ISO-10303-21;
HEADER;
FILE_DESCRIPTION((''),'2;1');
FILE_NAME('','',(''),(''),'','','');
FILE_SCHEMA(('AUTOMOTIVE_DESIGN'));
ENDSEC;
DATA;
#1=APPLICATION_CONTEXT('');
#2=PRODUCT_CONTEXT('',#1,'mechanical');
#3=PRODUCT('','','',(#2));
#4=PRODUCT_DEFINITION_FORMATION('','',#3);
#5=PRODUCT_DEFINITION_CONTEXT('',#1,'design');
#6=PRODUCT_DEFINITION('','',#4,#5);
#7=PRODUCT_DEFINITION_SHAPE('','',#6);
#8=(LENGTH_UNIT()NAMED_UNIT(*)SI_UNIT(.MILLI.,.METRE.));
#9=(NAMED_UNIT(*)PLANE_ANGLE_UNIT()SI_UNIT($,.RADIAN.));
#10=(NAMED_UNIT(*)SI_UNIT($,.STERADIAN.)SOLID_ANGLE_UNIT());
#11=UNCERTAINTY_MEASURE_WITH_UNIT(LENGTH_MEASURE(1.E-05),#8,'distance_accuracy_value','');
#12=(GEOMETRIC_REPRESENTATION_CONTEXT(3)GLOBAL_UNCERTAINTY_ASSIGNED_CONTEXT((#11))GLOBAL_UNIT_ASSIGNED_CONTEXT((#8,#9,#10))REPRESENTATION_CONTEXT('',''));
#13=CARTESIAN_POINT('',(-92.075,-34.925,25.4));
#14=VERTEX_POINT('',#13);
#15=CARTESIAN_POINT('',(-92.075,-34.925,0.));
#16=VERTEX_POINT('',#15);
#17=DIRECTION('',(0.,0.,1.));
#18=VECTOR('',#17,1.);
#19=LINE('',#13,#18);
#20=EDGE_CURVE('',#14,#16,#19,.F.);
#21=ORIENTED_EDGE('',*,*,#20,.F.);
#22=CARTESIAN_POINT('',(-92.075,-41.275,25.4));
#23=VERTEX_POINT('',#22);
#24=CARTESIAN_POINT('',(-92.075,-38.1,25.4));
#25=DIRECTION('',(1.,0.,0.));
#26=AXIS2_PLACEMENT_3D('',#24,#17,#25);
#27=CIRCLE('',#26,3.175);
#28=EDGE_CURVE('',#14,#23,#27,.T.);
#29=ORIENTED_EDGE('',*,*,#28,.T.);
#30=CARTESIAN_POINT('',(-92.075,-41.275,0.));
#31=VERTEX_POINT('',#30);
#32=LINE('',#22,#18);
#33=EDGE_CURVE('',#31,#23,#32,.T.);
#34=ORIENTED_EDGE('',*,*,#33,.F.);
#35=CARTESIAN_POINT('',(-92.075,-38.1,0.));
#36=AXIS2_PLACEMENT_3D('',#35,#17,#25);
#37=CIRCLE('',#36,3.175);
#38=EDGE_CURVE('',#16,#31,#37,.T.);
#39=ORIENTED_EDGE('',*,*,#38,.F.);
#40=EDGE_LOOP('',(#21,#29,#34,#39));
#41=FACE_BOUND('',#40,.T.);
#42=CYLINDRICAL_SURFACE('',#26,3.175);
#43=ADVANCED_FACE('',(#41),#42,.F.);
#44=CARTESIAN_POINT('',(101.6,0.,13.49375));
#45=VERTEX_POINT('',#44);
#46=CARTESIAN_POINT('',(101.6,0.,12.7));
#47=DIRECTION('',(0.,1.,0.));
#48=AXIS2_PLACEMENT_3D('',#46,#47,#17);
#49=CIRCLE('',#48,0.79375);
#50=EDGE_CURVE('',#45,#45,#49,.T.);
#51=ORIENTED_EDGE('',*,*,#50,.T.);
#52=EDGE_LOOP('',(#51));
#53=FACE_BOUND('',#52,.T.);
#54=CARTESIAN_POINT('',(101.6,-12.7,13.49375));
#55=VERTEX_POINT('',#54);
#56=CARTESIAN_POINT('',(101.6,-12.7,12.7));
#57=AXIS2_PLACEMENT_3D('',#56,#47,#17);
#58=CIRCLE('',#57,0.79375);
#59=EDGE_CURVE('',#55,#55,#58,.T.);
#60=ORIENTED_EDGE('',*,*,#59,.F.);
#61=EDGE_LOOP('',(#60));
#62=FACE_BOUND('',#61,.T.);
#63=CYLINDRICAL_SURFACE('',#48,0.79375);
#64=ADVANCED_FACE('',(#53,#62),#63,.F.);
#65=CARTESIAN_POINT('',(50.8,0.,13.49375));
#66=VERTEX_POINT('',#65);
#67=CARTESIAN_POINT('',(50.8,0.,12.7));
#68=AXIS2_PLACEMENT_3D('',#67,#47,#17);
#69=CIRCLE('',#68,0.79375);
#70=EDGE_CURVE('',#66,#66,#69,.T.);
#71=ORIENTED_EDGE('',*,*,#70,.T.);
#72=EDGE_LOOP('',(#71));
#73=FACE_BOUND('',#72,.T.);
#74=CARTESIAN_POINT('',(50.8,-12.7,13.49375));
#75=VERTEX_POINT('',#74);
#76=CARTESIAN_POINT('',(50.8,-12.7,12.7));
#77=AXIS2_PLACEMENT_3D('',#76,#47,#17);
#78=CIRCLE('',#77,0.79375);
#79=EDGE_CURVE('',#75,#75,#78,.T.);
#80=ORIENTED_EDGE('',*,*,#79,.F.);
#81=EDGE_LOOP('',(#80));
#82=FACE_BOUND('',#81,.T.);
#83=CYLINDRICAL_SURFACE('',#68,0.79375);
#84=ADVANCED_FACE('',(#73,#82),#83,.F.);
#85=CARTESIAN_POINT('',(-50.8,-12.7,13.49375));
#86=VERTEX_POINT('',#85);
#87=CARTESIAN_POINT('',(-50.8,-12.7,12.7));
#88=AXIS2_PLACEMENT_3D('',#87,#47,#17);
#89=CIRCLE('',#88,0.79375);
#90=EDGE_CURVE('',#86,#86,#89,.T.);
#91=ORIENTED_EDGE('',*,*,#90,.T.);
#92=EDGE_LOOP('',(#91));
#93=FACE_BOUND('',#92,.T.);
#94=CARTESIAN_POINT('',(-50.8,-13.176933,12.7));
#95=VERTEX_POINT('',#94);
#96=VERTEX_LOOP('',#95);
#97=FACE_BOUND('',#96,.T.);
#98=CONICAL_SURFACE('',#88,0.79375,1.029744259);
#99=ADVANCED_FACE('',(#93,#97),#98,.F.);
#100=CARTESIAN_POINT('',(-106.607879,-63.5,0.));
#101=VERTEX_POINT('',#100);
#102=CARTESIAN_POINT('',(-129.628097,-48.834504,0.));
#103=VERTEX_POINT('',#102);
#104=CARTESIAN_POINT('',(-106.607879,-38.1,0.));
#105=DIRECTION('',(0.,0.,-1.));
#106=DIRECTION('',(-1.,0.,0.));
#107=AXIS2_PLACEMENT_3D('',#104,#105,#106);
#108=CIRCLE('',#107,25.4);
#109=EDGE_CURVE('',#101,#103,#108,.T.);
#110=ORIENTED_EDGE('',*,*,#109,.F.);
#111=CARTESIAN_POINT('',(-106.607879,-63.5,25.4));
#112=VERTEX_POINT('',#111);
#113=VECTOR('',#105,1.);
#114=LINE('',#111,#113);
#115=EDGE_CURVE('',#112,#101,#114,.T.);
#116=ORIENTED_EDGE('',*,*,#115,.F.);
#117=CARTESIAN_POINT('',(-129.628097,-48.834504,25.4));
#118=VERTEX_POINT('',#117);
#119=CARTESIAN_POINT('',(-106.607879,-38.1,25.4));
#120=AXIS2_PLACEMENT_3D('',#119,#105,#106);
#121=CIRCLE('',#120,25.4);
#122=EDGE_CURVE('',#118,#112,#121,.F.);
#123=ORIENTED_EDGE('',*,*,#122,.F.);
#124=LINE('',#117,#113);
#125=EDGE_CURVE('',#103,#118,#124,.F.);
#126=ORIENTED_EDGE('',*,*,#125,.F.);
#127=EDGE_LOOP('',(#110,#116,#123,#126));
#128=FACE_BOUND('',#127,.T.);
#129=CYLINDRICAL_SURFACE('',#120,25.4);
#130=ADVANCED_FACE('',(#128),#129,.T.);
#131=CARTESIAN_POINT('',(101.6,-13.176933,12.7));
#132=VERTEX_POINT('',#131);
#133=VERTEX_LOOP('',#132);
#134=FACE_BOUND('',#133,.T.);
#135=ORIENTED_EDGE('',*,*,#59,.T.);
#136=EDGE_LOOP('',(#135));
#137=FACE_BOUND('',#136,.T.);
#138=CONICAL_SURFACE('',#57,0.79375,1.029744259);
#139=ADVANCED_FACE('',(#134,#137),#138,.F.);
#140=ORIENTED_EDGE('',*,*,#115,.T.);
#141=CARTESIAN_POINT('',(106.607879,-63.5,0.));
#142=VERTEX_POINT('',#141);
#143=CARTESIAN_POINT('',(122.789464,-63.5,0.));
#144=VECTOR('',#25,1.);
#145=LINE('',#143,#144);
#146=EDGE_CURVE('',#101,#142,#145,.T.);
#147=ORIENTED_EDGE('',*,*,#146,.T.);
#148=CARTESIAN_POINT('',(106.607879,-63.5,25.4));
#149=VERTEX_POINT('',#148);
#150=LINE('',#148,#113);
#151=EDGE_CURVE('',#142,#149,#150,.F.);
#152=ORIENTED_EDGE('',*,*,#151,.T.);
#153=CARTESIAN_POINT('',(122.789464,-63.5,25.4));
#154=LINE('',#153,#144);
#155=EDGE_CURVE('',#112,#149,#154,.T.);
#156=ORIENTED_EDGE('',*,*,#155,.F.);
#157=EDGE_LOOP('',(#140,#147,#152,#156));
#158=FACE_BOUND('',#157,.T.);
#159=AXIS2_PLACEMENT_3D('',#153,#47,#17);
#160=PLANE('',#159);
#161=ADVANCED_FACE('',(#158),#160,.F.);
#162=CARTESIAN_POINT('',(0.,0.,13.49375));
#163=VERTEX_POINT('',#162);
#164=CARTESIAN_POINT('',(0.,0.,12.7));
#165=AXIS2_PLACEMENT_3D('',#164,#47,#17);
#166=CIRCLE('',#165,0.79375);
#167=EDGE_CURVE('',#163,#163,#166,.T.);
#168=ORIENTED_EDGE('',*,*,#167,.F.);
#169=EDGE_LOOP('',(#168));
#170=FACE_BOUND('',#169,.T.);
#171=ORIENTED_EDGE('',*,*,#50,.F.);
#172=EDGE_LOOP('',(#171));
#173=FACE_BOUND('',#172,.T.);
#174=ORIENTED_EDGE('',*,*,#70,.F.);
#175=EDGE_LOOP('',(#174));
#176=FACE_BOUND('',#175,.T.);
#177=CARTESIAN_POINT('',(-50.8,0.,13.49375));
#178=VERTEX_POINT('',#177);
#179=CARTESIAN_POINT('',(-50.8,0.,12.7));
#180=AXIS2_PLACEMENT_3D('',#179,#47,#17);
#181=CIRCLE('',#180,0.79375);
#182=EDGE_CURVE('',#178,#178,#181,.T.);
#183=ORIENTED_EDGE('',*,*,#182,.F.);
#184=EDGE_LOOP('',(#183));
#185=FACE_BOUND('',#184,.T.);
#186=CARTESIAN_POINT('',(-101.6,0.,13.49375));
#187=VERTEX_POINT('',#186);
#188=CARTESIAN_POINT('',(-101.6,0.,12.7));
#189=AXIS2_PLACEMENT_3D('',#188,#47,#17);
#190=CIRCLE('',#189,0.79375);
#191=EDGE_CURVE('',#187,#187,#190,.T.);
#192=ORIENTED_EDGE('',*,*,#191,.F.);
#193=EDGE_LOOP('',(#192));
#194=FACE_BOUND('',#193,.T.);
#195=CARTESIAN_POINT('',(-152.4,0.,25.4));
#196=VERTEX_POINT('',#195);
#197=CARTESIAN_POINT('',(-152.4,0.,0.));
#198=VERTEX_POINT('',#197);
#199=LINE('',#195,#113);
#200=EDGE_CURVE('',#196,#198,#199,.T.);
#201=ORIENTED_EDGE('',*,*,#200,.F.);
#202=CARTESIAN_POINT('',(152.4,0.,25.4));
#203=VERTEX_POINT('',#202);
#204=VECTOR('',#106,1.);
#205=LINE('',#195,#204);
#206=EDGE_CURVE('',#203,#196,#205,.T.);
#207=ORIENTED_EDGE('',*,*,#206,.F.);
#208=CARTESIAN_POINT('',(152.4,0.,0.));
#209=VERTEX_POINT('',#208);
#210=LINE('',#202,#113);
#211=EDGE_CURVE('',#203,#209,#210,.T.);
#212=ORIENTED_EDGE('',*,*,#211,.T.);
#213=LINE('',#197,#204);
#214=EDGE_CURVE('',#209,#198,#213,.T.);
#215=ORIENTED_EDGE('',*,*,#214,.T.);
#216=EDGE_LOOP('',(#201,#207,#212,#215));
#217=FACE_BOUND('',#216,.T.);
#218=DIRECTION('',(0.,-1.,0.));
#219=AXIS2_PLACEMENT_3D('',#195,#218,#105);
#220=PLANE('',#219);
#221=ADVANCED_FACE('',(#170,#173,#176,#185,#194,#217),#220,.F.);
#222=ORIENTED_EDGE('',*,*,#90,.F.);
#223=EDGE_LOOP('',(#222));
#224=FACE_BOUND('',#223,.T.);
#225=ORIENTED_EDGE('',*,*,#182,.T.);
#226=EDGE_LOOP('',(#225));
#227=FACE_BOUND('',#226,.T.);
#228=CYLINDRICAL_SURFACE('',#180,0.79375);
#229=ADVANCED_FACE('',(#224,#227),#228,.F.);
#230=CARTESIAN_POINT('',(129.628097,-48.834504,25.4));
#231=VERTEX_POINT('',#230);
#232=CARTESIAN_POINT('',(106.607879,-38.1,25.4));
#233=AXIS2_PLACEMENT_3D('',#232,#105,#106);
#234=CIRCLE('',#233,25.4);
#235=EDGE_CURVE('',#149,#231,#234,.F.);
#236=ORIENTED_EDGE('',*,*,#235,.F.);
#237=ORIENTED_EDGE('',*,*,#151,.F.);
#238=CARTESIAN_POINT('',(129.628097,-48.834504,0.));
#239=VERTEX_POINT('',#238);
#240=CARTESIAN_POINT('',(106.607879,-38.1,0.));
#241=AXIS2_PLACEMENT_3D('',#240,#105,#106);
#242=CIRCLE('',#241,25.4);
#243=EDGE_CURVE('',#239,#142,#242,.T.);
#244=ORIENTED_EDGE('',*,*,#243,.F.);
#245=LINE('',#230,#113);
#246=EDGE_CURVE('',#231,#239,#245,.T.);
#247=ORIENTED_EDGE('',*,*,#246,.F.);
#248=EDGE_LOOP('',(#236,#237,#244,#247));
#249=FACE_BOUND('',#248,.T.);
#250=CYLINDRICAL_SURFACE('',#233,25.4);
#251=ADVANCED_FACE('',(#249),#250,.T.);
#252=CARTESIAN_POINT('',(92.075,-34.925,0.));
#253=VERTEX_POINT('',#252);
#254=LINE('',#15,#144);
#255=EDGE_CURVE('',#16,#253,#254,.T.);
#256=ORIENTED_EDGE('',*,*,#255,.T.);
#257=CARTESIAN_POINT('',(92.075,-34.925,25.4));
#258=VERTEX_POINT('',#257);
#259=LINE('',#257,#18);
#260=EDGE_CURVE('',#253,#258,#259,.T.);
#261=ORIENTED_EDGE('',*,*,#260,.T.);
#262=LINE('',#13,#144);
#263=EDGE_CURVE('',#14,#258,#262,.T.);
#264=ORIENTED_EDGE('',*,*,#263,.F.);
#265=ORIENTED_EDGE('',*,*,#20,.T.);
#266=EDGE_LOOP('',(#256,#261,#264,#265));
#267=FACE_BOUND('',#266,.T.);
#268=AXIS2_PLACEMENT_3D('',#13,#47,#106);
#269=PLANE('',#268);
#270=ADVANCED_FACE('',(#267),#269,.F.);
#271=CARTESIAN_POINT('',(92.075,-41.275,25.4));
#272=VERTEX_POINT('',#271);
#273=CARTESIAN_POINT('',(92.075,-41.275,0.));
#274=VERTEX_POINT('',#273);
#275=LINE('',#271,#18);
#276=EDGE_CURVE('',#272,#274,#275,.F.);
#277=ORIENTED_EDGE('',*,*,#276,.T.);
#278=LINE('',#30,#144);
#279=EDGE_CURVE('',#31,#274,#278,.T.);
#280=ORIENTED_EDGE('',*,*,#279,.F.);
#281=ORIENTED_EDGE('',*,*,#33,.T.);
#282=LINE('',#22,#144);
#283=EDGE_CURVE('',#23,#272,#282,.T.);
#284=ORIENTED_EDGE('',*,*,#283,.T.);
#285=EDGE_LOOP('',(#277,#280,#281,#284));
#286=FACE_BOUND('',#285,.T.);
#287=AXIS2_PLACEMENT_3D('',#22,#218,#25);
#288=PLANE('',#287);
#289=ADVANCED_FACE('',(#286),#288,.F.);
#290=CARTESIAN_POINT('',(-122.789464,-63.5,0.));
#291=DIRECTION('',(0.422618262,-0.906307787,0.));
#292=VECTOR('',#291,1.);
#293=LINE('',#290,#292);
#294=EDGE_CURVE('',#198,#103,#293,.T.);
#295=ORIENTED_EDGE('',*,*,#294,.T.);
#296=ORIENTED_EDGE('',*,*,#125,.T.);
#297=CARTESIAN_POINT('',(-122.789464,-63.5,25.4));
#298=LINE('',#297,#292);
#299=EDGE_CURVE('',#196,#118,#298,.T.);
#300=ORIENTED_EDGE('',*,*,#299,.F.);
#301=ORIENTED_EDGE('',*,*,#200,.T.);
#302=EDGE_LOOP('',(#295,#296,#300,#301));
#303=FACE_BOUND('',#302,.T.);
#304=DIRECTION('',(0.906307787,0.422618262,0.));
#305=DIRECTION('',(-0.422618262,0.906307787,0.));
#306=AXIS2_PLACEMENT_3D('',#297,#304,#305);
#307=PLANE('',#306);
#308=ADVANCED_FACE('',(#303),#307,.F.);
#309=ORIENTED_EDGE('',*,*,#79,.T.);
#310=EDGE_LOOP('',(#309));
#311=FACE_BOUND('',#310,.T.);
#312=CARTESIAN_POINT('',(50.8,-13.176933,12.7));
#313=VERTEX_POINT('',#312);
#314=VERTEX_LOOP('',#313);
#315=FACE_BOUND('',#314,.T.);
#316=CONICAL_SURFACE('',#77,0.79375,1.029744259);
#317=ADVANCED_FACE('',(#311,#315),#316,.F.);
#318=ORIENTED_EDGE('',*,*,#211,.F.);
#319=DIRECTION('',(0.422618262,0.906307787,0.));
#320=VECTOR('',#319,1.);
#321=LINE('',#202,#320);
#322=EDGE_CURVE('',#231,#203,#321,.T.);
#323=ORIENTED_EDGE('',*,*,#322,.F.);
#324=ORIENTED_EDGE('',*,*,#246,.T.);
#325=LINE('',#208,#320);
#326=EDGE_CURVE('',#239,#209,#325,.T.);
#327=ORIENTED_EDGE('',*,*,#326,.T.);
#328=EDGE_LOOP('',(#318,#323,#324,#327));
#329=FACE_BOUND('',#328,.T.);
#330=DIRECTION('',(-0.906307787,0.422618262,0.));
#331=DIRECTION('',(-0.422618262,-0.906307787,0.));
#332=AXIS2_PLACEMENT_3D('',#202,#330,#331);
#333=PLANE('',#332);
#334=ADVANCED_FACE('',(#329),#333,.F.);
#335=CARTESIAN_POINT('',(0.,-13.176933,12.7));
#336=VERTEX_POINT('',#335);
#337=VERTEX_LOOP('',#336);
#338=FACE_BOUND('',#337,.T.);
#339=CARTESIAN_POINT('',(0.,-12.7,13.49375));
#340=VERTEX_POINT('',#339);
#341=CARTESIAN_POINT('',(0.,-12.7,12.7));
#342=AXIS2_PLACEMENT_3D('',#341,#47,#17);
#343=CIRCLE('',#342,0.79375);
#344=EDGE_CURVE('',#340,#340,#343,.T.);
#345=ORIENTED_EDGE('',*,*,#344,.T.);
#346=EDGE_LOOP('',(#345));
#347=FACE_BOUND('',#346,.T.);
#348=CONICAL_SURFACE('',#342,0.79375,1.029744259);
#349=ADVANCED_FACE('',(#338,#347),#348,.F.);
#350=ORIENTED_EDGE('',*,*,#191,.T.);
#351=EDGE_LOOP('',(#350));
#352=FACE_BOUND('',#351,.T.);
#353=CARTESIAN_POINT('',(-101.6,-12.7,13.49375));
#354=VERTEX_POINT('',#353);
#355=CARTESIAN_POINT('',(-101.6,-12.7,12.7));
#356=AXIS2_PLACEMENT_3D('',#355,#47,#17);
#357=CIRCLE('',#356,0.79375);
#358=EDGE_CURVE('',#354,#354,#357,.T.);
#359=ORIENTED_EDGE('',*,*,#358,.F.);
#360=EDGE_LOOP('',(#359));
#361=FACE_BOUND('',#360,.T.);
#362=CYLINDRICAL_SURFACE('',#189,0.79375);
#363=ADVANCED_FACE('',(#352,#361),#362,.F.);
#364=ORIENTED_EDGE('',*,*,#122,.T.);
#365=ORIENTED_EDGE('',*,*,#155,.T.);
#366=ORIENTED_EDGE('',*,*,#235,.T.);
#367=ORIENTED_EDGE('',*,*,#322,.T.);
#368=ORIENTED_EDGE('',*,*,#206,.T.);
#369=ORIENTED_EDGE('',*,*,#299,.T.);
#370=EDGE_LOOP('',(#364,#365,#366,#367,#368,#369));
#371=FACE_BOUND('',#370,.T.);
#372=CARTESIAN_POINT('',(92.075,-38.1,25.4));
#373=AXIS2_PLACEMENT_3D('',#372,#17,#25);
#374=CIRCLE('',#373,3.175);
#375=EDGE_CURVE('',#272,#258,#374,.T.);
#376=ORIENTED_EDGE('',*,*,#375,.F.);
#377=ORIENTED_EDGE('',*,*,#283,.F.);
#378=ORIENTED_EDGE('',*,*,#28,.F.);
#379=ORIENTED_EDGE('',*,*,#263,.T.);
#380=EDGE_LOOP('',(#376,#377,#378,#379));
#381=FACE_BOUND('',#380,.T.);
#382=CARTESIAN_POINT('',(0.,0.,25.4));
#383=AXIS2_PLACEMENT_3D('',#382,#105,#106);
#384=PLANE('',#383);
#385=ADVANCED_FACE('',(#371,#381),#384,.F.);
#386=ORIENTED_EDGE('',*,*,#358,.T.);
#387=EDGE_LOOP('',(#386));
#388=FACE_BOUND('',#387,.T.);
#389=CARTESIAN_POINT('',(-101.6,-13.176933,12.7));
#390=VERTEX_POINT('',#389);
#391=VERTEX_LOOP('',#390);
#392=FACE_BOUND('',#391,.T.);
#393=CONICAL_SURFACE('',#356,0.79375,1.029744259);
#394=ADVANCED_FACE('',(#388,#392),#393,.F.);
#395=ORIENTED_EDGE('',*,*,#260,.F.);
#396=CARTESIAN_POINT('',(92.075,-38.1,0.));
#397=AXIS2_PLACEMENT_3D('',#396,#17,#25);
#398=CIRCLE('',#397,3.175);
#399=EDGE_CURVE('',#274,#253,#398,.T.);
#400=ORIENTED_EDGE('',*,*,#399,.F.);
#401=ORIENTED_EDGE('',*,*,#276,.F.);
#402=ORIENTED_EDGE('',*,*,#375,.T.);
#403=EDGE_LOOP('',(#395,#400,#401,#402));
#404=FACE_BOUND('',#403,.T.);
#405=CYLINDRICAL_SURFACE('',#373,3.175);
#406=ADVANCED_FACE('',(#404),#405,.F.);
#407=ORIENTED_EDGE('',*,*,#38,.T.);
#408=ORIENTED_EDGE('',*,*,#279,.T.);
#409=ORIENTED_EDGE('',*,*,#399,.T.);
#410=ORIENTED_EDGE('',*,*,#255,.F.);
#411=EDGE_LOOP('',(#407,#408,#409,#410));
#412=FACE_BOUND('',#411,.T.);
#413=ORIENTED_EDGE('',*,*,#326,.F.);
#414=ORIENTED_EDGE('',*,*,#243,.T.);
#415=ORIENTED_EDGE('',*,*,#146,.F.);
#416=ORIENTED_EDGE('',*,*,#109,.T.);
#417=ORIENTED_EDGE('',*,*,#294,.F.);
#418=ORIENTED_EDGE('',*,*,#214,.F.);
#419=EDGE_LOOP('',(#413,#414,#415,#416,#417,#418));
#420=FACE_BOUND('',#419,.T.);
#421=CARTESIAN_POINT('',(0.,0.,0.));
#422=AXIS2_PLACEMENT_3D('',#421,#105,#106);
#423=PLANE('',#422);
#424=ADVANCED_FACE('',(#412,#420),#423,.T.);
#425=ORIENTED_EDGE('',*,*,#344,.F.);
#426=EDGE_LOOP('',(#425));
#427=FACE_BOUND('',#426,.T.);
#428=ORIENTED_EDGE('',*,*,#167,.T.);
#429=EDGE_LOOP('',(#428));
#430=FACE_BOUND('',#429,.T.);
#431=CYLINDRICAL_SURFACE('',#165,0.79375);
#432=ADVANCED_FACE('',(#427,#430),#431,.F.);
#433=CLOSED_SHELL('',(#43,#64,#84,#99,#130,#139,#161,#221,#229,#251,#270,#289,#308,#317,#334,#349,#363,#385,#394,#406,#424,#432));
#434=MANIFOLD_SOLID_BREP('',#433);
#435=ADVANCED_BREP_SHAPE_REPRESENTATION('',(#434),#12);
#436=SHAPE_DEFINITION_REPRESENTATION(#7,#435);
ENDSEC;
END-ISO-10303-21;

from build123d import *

# Parameters (mm, degrees)
BOSS_EXTRUDE1_DEPTH                = 25.4
FILLET1_R                          = 25.4
F_1_4_0_25_DIAMETER_SLOT1_DEPTH    = 25.4
F_1_16_0_0625_DIAMETER_HOLE1_D     = 1.5875
F_1_16_0_0625_DIAMETER_HOLE1_DEPTH = 12.7
F_1_16_0_0625_DIAMETER_HOLE1_TIP   = 0.476933116


# Read off the part's stored shape, not the designer's step: 1/4 (0.25) Diameter Slot1
with BuildPart() as part:
    # Sketch1 → Boss-Extrude1 (new body)
    with BuildSketch(Plane.XY):
        Polygon((-152.4, 0), (152.4, 0), (122.789463707, -63.5), (-122.789463707, -63.5), align=None)
    extrude(amount=BOSS_EXTRUDE1_DEPTH)

    # Fillet1
    fillet1_edges = [part.edges().sort_by_distance(p)[0] for p in [
        (122.789463707, -63.5, 12.7),
        (-122.789463707, -63.5, 12.7),
    ]]
    fillet(fillet1_edges, radius=FILLET1_R)

    # 1/4 (0.25) Diameter Slot1 outline → 1/4 (0.25) Diameter Slot1 (cut)
    with BuildSketch(Plane.XY):
        with BuildLine():
            Line((-92.075, -41.275), (92.075, -41.275))
            ThreePointArc((92.075, -41.275), (95.25, -38.1), (92.075, -34.925))
            Line((92.075, -34.925), (-92.075, -34.925))
            ThreePointArc((-92.075, -34.925), (-95.25, -38.1), (-92.075, -41.275))
        make_face()
    extrude(amount=F_1_4_0_25_DIAMETER_SLOT1_DEPTH, mode=Mode.SUBTRACT)

    # 1/16 (0.0625) Diameter Hole1
    with Locations(Plane(origin=(0, 0, 0), x_dir=(1, 0, 0), z_dir=(0, 1, 0))):
        with Locations((-101.6, -12.7), (-50.8, -12.7), (0, -12.7), (50.8, -12.7), (101.6, -12.7)):
            Hole(F_1_16_0_0625_DIAMETER_HOLE1_D / 2, depth=F_1_16_0_0625_DIAMETER_HOLE1_DEPTH)
            with Locations((0, 0, -(F_1_16_0_0625_DIAMETER_HOLE1_DEPTH + F_1_16_0_0625_DIAMETER_HOLE1_TIP / 2))):  # 118° drill point
                Cone(0, F_1_16_0_0625_DIAMETER_HOLE1_D / 2, F_1_16_0_0625_DIAMETER_HOLE1_TIP, mode=Mode.SUBTRACT)


solid = part.part
